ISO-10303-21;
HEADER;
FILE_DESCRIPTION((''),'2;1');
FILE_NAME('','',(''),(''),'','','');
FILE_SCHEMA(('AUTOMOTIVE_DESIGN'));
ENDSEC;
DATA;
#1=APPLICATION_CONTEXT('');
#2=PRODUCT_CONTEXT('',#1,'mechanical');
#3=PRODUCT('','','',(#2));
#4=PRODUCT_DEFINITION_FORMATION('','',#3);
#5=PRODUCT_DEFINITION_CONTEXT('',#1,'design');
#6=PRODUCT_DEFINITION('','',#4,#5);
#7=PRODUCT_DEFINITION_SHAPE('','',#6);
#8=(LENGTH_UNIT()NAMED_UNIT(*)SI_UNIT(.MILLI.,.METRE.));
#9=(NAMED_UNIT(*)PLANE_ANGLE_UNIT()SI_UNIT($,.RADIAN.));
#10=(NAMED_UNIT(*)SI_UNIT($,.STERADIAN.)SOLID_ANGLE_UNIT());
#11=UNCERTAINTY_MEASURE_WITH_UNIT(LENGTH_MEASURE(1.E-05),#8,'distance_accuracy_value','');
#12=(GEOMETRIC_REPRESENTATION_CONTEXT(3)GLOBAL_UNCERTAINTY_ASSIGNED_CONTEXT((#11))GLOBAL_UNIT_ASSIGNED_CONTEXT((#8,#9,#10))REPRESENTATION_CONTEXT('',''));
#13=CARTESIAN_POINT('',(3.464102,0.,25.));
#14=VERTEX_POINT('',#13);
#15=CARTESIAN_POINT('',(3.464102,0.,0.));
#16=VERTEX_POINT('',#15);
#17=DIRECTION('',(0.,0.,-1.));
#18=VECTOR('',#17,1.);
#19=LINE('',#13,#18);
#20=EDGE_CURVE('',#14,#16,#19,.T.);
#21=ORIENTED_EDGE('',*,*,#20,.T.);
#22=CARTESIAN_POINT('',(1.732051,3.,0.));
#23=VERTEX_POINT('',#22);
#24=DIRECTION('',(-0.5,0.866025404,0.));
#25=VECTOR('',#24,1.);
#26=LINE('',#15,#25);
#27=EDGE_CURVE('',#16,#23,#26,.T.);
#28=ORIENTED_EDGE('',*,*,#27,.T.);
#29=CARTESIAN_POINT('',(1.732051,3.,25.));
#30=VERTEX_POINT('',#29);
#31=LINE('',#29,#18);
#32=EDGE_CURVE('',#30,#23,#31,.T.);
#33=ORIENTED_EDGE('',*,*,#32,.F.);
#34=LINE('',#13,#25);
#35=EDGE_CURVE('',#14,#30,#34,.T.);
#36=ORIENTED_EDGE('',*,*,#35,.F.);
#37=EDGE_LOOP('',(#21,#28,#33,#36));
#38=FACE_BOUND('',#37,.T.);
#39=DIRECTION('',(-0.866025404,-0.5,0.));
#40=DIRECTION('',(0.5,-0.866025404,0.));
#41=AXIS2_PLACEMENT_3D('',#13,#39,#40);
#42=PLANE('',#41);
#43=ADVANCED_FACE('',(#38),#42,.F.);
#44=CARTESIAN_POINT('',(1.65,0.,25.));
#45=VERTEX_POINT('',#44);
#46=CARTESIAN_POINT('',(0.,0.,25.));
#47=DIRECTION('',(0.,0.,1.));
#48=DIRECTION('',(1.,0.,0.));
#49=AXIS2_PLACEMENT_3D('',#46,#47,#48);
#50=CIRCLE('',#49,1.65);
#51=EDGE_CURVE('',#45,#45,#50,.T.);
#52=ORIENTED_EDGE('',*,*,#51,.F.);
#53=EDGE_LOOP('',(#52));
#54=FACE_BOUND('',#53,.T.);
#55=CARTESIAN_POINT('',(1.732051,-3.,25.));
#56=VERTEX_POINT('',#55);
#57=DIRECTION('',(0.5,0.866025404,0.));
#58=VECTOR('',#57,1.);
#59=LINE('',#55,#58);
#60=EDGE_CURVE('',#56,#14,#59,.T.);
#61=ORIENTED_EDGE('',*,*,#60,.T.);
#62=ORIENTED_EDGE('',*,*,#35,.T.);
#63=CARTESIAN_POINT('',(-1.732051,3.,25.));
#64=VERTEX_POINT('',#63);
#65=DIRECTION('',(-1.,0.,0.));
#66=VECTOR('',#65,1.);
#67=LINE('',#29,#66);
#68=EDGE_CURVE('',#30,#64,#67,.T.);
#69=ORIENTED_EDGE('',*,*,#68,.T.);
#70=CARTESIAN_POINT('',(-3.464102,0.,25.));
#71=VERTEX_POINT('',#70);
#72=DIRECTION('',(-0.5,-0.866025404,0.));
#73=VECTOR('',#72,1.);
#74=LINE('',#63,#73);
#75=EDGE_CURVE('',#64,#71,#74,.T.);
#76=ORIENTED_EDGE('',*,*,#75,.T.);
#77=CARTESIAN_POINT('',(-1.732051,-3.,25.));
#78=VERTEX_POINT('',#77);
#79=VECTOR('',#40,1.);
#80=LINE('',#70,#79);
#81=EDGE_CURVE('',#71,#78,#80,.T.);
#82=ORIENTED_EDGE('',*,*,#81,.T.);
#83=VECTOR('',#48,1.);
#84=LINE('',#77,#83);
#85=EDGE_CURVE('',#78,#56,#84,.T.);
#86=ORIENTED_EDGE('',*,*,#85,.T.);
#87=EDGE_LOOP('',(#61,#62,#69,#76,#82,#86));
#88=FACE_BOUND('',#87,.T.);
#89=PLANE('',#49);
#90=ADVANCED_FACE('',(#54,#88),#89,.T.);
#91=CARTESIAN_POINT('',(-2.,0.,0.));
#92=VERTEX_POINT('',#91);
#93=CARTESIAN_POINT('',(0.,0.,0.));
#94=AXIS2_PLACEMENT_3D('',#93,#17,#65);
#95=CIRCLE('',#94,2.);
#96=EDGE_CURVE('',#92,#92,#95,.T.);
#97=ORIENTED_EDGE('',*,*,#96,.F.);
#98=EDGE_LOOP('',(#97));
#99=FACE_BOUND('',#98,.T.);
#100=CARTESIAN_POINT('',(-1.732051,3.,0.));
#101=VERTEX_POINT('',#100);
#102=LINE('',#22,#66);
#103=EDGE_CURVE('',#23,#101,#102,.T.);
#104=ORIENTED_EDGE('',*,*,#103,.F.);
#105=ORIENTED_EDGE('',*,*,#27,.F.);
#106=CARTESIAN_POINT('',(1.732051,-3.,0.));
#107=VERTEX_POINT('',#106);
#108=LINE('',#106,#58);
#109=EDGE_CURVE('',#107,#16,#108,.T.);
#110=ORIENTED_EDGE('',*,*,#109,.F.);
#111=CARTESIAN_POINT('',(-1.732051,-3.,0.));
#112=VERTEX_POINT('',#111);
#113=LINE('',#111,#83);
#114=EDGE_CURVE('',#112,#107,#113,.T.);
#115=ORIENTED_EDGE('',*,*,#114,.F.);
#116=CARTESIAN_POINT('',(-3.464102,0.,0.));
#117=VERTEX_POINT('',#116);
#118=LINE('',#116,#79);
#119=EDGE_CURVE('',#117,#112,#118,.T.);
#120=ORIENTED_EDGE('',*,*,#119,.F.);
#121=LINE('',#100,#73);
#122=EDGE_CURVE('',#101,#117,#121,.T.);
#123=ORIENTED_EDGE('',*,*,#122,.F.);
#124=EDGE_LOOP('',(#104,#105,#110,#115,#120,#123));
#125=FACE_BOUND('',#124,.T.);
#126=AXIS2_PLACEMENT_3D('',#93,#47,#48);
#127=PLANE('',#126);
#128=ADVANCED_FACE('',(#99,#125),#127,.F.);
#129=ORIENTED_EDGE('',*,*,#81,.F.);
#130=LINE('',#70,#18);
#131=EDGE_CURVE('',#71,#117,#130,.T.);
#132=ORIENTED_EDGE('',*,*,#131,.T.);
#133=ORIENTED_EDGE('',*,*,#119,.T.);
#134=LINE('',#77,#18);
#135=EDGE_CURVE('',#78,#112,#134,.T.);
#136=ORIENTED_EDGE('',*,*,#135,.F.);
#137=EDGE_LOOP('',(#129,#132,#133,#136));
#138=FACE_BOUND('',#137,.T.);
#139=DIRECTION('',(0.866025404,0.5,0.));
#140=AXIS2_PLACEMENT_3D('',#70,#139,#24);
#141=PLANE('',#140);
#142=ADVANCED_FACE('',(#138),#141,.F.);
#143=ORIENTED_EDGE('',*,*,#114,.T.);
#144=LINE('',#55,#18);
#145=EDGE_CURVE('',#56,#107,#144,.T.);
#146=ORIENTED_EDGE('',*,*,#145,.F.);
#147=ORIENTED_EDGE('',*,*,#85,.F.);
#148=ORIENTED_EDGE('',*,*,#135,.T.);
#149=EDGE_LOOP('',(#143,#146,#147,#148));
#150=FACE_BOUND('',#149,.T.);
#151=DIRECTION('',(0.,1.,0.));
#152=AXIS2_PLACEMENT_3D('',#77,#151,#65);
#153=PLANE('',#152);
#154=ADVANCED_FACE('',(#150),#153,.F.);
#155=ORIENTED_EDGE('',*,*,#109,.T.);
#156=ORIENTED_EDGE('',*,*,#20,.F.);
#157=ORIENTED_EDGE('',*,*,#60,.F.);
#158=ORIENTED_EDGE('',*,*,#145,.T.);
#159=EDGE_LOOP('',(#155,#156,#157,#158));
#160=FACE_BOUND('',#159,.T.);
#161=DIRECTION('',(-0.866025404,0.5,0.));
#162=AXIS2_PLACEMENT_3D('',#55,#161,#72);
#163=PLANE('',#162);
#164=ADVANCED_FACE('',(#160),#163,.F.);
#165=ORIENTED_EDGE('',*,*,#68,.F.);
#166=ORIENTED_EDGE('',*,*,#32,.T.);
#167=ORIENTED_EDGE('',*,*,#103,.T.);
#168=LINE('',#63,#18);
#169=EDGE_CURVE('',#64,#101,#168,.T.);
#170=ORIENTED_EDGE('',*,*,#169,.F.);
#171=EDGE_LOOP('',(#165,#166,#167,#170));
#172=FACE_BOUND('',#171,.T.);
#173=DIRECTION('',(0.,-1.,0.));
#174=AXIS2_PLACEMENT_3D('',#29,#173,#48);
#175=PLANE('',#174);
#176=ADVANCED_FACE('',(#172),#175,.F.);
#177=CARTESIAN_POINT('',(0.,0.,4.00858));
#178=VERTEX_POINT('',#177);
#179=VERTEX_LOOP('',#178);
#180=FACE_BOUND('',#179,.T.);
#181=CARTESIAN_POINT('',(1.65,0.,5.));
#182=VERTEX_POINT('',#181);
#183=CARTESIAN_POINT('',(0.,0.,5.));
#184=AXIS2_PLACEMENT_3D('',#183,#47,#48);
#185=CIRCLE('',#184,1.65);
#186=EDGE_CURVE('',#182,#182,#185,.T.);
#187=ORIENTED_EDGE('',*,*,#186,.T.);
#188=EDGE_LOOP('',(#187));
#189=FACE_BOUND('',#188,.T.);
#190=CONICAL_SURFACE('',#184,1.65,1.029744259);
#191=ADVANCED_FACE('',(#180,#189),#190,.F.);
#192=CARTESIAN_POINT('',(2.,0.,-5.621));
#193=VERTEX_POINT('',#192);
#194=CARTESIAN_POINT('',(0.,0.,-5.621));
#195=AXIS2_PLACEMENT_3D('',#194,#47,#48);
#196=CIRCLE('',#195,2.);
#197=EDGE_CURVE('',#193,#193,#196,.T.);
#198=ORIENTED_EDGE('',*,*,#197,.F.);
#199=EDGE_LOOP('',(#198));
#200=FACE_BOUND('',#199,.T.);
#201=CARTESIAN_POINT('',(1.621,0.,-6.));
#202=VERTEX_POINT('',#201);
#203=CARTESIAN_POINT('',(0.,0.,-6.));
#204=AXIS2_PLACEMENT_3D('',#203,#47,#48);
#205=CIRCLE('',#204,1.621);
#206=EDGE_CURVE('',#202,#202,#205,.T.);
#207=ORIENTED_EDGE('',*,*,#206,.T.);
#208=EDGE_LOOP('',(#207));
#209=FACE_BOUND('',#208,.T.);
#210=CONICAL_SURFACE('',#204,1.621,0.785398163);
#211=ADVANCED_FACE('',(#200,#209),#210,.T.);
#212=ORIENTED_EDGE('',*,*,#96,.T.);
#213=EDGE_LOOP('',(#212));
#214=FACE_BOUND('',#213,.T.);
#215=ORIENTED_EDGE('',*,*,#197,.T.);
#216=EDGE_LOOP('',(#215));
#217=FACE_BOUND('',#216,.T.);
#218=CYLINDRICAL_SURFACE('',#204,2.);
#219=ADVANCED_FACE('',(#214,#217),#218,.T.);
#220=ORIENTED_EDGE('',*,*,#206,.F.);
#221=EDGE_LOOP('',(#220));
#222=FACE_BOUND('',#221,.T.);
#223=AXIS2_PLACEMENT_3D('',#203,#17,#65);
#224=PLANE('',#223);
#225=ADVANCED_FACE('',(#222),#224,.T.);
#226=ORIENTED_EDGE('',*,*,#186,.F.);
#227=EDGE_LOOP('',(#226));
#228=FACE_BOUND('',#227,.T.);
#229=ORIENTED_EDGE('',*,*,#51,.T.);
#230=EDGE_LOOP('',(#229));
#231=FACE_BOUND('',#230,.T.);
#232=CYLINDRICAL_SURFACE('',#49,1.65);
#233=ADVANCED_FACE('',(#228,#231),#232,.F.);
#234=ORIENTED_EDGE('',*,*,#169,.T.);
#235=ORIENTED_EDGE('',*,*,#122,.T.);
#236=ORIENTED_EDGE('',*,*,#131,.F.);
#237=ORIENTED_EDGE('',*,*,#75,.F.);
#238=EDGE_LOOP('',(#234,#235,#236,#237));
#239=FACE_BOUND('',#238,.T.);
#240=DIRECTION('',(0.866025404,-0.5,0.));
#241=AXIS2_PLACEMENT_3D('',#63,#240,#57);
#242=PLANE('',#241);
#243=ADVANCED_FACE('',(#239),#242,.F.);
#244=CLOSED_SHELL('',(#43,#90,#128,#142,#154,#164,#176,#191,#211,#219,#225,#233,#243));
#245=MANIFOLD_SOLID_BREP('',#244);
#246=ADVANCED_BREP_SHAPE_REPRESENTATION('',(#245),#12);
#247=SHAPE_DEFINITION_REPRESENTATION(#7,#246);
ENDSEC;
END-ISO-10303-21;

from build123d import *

# Parameters (mm, degrees)
EXTRUDE_1_DEPTH        = 25
HOLE_WIZARD_M4_1_D     = 3.3
HOLE_WIZARD_M4_1_DEPTH = 20
HOLE_WIZARD_M4_1_TIP   = 0.991420021
SKETCH_5_R             = 2
EXTRUDE_2_DEPTH        = 6


# Read off the part's stored shape, not the designer's step: M4 机械螺纹 螺柱1
with BuildPart() as part:
    # 草图1 → 凸台-拉伸1 (new body)
    with BuildSketch(Plane.XY):
        Polygon((-3.464101615, 0), (-1.732050808, -3), (1.732050808, -3), (3.464101615, 0), (1.732050808, 3), (-1.732050808, 3), align=None)
    extrude(amount=EXTRUDE_1_DEPTH)

    # M4 螺纹孔1
    with Locations(Plane.XY.offset(25)):
        with Locations((0, 0)):
            Hole(HOLE_WIZARD_M4_1_D / 2, depth=HOLE_WIZARD_M4_1_DEPTH)
            with Locations((0, 0, -(HOLE_WIZARD_M4_1_DEPTH + HOLE_WIZARD_M4_1_TIP / 2))):  # 118° drill point
                Cone(0, HOLE_WIZARD_M4_1_D / 2, HOLE_WIZARD_M4_1_TIP, mode=Mode.SUBTRACT)

    # 草图5 → 凸台-拉伸2 (add)
    with BuildSketch(Plane(origin=(0, 0, 0), x_dir=(-1, 0, 0), z_dir=(0, 0, -1))):
        Circle(SKETCH_5_R)
    extrude(amount=EXTRUDE_2_DEPTH)

    # M4 机械螺纹 螺柱1 outline → M4 机械螺纹 螺柱1 (revolve, cut)
    with BuildSketch(Plane.XZ):
        Polygon((2, -5.621), (1.621, -6), (2, -6), align=None)
    revolve(axis=Axis((0, 0, 0), (0, 0, 1)), mode=Mode.SUBTRACT)


solid = part.part
